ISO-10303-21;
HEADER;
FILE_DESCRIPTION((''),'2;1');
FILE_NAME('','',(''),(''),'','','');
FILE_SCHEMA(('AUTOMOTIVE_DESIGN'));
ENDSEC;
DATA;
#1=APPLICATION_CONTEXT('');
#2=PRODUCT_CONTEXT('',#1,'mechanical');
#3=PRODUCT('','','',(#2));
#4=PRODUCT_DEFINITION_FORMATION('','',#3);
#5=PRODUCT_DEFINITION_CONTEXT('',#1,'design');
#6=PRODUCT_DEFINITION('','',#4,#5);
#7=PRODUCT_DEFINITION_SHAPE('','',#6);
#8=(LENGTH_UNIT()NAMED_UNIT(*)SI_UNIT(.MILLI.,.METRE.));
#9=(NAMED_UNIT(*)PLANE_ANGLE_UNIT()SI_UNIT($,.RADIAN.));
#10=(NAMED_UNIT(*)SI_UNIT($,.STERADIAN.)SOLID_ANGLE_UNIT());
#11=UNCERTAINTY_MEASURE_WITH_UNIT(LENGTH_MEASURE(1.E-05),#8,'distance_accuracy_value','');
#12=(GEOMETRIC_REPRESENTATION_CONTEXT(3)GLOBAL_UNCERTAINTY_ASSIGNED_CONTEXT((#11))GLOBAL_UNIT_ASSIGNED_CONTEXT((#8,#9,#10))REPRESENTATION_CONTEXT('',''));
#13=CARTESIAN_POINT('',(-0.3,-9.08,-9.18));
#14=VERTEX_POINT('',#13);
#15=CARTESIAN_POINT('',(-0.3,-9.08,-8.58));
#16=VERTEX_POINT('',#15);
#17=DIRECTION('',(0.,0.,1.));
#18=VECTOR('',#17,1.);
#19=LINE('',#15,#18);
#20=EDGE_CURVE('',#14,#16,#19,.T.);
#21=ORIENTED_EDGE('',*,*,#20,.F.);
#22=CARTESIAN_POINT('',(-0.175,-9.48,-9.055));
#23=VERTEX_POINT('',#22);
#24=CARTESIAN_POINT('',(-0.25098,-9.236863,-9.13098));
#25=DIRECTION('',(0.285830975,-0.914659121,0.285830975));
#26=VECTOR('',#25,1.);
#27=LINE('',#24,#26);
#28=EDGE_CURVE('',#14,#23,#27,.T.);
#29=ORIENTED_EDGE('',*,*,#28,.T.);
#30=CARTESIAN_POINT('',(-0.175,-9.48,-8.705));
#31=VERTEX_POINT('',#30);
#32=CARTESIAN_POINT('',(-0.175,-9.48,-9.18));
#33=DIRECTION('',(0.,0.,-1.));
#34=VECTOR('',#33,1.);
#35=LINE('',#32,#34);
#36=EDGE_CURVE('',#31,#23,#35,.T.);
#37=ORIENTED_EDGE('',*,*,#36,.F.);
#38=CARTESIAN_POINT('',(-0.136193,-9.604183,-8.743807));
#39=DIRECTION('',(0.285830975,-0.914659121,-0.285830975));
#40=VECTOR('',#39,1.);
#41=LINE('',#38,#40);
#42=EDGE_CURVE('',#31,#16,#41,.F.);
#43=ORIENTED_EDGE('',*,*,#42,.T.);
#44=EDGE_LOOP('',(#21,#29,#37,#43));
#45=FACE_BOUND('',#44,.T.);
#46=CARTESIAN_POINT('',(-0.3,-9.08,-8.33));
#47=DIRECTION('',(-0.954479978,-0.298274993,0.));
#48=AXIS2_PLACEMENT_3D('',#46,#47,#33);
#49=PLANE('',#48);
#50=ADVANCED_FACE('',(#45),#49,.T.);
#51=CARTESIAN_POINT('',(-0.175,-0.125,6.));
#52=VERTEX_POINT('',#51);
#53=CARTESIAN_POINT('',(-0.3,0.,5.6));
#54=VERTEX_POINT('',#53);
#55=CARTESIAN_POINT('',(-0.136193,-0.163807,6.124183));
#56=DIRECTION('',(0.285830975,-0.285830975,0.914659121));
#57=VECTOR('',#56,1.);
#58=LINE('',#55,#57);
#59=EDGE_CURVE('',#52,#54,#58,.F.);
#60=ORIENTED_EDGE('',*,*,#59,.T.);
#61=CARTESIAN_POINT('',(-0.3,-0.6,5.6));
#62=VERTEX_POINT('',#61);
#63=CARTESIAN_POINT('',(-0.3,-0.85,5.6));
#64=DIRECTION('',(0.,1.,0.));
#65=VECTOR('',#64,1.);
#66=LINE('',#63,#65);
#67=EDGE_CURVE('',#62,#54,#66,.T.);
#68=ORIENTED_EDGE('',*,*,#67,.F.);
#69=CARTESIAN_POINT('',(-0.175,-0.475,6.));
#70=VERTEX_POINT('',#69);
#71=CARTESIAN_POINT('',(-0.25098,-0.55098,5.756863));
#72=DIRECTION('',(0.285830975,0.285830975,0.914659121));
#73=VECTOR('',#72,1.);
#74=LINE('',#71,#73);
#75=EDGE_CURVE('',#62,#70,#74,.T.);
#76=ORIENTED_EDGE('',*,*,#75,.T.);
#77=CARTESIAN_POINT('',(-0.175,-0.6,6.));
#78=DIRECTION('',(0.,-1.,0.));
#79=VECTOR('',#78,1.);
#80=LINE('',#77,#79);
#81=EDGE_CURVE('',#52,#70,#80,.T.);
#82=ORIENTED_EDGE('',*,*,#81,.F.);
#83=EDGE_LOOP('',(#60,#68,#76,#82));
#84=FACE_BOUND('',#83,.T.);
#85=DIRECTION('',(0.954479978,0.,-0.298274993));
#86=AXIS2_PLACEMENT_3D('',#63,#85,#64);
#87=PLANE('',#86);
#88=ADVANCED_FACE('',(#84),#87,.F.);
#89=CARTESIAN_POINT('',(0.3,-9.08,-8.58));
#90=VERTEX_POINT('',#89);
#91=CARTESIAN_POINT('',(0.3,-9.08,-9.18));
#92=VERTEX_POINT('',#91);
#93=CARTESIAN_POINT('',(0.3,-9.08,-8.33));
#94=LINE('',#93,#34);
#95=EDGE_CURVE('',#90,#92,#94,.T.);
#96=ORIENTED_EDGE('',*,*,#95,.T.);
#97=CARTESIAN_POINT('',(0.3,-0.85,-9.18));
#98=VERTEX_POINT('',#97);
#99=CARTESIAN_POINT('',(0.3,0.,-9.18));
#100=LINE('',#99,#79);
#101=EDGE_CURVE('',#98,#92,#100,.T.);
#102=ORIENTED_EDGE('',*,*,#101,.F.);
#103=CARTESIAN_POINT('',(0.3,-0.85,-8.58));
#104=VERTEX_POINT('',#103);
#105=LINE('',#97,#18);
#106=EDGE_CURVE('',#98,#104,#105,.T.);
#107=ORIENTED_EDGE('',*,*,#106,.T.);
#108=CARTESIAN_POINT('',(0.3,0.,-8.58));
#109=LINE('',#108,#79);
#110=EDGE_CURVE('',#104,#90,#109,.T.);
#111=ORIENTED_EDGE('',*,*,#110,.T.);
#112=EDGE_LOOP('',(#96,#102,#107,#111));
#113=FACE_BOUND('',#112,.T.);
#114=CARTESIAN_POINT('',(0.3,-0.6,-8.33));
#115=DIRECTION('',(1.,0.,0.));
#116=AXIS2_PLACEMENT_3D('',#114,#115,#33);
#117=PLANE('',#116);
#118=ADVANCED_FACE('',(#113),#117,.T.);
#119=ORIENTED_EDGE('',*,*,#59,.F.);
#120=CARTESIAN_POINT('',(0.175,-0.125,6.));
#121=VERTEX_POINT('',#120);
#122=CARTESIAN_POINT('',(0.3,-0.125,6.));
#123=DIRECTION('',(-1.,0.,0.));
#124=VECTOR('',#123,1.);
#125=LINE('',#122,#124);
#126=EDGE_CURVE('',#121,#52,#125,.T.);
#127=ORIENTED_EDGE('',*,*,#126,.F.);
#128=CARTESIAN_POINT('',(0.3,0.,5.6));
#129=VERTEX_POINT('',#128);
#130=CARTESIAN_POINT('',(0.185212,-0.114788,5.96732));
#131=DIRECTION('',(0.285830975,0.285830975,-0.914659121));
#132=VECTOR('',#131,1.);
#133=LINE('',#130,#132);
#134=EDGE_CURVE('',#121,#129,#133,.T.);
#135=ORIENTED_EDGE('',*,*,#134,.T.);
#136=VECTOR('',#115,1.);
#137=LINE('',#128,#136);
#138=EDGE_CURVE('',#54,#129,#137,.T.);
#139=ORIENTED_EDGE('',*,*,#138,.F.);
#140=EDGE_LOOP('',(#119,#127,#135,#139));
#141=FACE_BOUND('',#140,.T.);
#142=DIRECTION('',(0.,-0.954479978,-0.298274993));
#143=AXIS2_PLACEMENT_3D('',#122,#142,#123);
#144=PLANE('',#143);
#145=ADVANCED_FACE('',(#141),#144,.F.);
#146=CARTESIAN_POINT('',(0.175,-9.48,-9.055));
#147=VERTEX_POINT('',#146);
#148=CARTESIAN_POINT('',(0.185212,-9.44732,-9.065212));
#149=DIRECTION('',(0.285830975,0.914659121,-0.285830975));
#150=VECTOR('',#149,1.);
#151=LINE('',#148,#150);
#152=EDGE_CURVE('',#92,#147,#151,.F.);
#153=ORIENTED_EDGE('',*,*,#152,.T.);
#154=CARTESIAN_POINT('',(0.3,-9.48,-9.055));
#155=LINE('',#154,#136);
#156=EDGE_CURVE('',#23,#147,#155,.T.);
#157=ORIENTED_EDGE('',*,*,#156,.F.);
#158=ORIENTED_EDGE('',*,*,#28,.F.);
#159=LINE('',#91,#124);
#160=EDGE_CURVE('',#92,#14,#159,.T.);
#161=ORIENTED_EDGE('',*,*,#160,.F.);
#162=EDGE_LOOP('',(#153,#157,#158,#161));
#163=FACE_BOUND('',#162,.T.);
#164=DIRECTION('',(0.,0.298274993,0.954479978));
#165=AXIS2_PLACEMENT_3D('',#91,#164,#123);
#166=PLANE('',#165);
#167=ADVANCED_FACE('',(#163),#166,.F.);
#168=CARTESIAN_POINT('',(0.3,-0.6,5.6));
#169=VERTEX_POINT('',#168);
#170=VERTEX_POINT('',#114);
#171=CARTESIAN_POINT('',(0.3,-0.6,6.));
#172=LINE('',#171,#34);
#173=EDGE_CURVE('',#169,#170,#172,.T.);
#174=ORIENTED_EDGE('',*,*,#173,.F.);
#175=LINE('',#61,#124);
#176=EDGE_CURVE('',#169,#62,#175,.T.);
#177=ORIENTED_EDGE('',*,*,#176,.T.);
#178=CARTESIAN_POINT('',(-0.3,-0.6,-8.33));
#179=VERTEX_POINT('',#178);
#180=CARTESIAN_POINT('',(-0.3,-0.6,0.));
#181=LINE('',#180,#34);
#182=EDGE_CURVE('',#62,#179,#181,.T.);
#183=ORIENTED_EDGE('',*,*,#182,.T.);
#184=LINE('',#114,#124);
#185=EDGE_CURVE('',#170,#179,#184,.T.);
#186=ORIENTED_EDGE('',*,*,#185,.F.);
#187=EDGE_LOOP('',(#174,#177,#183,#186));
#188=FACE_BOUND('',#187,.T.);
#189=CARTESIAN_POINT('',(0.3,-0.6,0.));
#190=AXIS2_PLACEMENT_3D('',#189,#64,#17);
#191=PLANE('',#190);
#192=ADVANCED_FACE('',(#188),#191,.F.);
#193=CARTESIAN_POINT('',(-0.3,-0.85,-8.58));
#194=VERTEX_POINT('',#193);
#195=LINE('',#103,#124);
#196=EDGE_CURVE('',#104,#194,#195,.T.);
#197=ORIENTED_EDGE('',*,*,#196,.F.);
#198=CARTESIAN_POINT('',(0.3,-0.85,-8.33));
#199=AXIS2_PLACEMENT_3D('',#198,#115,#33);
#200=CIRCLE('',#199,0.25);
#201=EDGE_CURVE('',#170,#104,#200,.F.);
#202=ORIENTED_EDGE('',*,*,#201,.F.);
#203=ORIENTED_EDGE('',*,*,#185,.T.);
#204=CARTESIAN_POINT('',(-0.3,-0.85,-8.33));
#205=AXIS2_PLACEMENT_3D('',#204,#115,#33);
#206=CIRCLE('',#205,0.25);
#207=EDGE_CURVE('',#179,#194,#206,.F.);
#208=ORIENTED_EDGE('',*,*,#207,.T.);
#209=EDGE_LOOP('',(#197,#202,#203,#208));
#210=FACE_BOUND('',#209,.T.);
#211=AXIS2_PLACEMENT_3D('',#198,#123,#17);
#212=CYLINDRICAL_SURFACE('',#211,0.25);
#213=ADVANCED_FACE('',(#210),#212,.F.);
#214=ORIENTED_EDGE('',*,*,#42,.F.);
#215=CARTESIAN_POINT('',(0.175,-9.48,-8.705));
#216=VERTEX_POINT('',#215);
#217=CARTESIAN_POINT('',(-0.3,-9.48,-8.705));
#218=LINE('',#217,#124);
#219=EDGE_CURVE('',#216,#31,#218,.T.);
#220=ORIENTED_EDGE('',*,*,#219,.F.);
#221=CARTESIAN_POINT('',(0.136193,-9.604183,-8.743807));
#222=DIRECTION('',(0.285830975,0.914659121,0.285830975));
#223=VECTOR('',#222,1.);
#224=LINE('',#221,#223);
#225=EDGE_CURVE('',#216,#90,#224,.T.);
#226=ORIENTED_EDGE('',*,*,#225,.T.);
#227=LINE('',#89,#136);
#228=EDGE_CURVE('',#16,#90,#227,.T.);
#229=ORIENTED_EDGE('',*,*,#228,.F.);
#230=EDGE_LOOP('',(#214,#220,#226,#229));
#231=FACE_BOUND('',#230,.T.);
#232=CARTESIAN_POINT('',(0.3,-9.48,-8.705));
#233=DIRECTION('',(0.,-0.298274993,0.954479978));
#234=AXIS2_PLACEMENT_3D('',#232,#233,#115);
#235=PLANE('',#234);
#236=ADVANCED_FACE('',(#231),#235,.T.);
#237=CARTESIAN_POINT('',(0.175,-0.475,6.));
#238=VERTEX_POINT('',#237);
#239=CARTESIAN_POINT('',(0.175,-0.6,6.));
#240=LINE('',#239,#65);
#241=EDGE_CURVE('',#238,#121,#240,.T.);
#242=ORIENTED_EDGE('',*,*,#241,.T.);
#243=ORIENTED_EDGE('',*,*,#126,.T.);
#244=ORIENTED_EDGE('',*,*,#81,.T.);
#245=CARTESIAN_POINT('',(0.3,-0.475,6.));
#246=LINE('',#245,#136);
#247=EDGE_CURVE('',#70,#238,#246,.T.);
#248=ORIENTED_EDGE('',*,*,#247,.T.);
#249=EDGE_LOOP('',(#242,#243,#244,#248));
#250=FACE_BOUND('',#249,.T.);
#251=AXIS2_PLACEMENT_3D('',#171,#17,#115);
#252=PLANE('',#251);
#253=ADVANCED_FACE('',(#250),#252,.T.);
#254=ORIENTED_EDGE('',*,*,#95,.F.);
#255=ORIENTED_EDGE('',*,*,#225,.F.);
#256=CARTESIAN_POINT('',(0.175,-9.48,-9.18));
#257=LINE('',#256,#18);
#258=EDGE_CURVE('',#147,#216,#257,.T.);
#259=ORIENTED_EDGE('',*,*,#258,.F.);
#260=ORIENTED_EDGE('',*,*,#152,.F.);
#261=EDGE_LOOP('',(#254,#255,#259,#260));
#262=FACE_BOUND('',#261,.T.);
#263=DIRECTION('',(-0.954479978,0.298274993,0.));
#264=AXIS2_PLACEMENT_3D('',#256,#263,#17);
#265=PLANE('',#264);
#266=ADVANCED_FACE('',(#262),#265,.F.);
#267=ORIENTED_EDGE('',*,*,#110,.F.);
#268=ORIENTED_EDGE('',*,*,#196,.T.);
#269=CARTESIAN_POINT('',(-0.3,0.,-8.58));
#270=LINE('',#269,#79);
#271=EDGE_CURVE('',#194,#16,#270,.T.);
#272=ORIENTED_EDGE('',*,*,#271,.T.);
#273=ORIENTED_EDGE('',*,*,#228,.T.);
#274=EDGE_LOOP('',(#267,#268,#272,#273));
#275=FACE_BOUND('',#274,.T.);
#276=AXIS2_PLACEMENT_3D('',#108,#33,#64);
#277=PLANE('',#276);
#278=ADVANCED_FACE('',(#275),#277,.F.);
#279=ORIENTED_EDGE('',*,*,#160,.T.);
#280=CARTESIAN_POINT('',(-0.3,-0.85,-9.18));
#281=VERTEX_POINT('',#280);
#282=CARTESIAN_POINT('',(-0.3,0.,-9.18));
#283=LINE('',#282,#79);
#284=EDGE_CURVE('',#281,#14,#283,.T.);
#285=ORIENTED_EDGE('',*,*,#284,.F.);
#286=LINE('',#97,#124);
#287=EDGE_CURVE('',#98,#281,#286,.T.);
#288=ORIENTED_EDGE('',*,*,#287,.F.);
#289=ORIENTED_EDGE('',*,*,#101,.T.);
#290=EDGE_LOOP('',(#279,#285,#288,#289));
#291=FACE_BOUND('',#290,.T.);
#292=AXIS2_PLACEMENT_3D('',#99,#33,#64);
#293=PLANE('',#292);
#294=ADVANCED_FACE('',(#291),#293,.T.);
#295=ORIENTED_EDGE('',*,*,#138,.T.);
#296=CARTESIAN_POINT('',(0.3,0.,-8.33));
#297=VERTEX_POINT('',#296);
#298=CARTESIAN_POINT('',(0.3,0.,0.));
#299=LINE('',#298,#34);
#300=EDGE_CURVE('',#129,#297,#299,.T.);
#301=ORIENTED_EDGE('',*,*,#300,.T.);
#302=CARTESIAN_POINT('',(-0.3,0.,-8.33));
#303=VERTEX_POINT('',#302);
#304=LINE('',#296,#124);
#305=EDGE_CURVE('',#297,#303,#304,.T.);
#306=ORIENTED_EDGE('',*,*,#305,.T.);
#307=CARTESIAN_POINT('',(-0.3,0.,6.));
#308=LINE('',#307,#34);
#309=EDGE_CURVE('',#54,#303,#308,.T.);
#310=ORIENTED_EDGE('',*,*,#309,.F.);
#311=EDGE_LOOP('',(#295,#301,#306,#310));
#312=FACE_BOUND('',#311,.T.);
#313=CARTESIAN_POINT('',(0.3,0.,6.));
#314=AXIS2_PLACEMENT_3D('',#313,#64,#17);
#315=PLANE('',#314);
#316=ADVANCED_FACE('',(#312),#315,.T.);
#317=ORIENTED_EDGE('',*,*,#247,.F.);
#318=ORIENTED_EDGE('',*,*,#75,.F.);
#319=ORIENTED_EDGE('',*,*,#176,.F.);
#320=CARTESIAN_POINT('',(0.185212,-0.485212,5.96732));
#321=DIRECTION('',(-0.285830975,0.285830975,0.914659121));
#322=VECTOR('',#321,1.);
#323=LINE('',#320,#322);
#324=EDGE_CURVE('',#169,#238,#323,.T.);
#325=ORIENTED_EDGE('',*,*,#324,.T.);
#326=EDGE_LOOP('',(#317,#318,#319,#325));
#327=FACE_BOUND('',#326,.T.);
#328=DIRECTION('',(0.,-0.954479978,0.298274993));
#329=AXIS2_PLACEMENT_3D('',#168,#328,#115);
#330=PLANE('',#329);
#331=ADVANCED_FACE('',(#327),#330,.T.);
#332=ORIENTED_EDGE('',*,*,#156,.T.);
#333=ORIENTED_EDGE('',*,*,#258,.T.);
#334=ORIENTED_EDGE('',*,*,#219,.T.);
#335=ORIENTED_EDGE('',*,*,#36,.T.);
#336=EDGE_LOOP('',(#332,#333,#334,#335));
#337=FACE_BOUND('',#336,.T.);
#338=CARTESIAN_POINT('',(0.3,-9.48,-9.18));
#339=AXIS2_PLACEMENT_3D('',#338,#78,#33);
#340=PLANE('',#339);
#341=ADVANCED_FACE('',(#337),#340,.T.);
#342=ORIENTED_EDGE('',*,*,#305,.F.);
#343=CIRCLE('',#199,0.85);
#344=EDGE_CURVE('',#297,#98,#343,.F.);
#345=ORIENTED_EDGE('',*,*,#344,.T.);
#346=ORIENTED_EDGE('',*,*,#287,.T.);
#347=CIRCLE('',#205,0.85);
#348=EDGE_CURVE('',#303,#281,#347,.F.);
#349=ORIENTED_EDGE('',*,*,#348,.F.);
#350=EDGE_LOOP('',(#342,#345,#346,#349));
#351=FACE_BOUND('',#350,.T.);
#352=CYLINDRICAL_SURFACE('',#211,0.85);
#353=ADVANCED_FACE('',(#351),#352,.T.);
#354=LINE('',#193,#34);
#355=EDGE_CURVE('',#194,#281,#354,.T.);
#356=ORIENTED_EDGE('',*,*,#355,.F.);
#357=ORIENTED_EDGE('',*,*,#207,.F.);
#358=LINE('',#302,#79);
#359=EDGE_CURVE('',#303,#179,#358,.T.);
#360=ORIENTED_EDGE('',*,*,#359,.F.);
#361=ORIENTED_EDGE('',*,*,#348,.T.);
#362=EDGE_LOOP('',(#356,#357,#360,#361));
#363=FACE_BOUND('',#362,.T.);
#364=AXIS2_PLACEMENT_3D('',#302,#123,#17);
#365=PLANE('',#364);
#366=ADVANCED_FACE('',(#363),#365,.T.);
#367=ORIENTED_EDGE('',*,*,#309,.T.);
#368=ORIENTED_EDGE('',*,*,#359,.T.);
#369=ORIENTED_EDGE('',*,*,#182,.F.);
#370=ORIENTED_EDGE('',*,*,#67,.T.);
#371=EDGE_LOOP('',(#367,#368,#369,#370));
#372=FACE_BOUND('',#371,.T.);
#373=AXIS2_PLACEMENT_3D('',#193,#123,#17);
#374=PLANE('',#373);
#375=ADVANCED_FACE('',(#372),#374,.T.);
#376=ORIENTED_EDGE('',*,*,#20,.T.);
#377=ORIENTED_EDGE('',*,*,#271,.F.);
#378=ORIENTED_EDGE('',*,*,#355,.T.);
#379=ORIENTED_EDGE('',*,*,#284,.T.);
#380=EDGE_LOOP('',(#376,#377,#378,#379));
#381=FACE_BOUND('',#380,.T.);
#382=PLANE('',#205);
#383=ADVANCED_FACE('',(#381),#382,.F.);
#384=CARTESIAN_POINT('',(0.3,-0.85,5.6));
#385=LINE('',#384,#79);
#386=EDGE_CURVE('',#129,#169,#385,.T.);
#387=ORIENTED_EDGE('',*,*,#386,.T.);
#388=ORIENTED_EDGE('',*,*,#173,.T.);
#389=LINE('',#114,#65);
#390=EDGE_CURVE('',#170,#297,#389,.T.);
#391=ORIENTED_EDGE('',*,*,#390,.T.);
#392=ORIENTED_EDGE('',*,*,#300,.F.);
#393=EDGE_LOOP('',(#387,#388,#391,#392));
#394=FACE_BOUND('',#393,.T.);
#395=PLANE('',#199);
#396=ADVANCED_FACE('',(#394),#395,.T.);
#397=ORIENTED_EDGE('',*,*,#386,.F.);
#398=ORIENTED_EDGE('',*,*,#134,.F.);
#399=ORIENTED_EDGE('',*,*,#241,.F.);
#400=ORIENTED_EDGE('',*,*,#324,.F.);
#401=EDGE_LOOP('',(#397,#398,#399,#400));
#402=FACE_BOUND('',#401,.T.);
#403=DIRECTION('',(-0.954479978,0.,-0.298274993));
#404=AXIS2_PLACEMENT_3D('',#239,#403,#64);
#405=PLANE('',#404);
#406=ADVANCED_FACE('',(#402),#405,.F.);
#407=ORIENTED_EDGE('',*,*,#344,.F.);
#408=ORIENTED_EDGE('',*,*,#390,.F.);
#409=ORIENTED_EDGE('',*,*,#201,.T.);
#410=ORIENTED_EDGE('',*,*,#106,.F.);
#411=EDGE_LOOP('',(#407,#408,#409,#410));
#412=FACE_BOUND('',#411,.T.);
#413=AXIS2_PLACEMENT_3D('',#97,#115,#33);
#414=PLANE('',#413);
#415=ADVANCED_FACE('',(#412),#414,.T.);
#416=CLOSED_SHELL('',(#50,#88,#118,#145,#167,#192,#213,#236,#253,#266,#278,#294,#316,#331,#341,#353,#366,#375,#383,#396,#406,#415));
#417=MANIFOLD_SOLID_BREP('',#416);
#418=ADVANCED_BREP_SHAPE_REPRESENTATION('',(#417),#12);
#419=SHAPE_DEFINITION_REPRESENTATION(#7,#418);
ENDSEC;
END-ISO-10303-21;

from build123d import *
from OCP.BRepFilletAPI import BRepFilletAPI_MakeChamfer

# Parameters (mm, degrees)
T_LE_DE_BASE_PLI_E1_DEPTH = 0.3
CHANFREIN1_SIZE           = 0.4
CHANFREIN1_SIZE2          = 0.125


# Sheet-metal steps are written as plain solids
with BuildPart() as part:
    # Esquisse2 → Tôle de base pliée1 (new, symmetric)
    with BuildSketch(Plane(origin=(0, 0, 0), x_dir=(0, 0, -1), z_dir=(1, 0, 0))):
        with BuildLine():
            Line((-6, 0), (0, 0))
            Line((0, 0), (8.33, 0))
            ThreePointArc((8.33, 0), (8.931040764, -0.248959236), (9.18, -0.85))
            Line((9.18, -0.85), (9.18, -9.48))
            Line((9.18, -9.48), (8.58, -9.48))
            Line((8.58, -9.48), (8.58, -0.85))
            ThreePointArc((8.58, -0.85), (8.506776695, -0.673223305), (8.33, -0.6))
            Line((8.33, -0.6), (0, -0.6))
            Line((0, -0.6), (-6, -0.6))
            Line((-6, -0.6), (-6, 0))
        make_face()
    extrude(amount=T_LE_DE_BASE_PLI_E1_DEPTH, both=True)

    # Chanfrein1: one chamfer whose edges measure the first distance from different faces: ONE call of the kernel's chamfer builder (chamfer() names one face for all edges)
    chanfrein1_edges_1 = [part.edges().sort_by_distance(p)[0] for p in [
        (-0.3, -9.48, -8.88),
        (-0.3, -0.3, 6),
    ]]
    chanfrein1_side_1 = [part.faces().sort_by_distance(p)[0] for p in [
        (-0.3, -0.178970053, -1.165),
    ]]
    chanfrein1_edges_2 = [part.edges().sort_by_distance(p)[0] for p in [
        (0, -0.6, 6),
    ]]
    chanfrein1_side_2 = [part.faces().sort_by_distance(p)[0] for p in [
        (0, -0.6, -1.165),
    ]]
    chanfrein1_edges_3 = [part.edges().sort_by_distance(p)[0] for p in [
        (0, 0, 6),
    ]]
    chanfrein1_side_3 = [part.faces().sort_by_distance(p)[0] for p in [
        (0, 0, -1.165),
    ]]
    chanfrein1_edges_4 = [part.edges().sort_by_distance(p)[0] for p in [
        (0, -9.48, -9.18),
    ]]
    chanfrein1_side_4 = [part.faces().sort_by_distance(p)[0] for p in [
        (0, -5.165, -9.18),
    ]]
    chanfrein1_edges_5 = [part.edges().sort_by_distance(p)[0] for p in [
        (0, -9.48, -8.58),
    ]]
    chanfrein1_side_5 = [part.faces().sort_by_distance(p)[0] for p in [
        (0, -5.165, -8.58),
    ]]
    chanfrein1_edges_6 = [part.edges().sort_by_distance(p)[0] for p in [
        (0.3, -0.3, 6),
        (0.3, -9.48, -8.88),
    ]]
    chanfrein1_side_6 = [part.faces().sort_by_distance(p)[0] for p in [
        (0.3, -0.178970053, -1.165),
    ]]
    chanfrein1 = BRepFilletAPI_MakeChamfer(part.part.solid().wrapped)
    for e in chanfrein1_edges_1:
        chanfrein1.Add(CHANFREIN1_SIZE, CHANFREIN1_SIZE2, e.wrapped, chanfrein1_side_1[0].wrapped)  # the first distance lies on this face
    for e in chanfrein1_edges_2:
        chanfrein1.Add(CHANFREIN1_SIZE, CHANFREIN1_SIZE2, e.wrapped, chanfrein1_side_2[0].wrapped)  # the first distance lies on this face
    for e in chanfrein1_edges_3:
        chanfrein1.Add(CHANFREIN1_SIZE, CHANFREIN1_SIZE2, e.wrapped, chanfrein1_side_3[0].wrapped)  # the first distance lies on this face
    for e in chanfrein1_edges_4:
        chanfrein1.Add(CHANFREIN1_SIZE, CHANFREIN1_SIZE2, e.wrapped, chanfrein1_side_4[0].wrapped)  # the first distance lies on this face
    for e in chanfrein1_edges_5:
        chanfrein1.Add(CHANFREIN1_SIZE, CHANFREIN1_SIZE2, e.wrapped, chanfrein1_side_5[0].wrapped)  # the first distance lies on this face
    for e in chanfrein1_edges_6:
        chanfrein1.Add(CHANFREIN1_SIZE, CHANFREIN1_SIZE2, e.wrapped, chanfrein1_side_6[0].wrapped)  # the first distance lies on this face
    add(Compound.cast(chanfrein1.Shape()), mode=Mode.REPLACE)


solid = part.part
